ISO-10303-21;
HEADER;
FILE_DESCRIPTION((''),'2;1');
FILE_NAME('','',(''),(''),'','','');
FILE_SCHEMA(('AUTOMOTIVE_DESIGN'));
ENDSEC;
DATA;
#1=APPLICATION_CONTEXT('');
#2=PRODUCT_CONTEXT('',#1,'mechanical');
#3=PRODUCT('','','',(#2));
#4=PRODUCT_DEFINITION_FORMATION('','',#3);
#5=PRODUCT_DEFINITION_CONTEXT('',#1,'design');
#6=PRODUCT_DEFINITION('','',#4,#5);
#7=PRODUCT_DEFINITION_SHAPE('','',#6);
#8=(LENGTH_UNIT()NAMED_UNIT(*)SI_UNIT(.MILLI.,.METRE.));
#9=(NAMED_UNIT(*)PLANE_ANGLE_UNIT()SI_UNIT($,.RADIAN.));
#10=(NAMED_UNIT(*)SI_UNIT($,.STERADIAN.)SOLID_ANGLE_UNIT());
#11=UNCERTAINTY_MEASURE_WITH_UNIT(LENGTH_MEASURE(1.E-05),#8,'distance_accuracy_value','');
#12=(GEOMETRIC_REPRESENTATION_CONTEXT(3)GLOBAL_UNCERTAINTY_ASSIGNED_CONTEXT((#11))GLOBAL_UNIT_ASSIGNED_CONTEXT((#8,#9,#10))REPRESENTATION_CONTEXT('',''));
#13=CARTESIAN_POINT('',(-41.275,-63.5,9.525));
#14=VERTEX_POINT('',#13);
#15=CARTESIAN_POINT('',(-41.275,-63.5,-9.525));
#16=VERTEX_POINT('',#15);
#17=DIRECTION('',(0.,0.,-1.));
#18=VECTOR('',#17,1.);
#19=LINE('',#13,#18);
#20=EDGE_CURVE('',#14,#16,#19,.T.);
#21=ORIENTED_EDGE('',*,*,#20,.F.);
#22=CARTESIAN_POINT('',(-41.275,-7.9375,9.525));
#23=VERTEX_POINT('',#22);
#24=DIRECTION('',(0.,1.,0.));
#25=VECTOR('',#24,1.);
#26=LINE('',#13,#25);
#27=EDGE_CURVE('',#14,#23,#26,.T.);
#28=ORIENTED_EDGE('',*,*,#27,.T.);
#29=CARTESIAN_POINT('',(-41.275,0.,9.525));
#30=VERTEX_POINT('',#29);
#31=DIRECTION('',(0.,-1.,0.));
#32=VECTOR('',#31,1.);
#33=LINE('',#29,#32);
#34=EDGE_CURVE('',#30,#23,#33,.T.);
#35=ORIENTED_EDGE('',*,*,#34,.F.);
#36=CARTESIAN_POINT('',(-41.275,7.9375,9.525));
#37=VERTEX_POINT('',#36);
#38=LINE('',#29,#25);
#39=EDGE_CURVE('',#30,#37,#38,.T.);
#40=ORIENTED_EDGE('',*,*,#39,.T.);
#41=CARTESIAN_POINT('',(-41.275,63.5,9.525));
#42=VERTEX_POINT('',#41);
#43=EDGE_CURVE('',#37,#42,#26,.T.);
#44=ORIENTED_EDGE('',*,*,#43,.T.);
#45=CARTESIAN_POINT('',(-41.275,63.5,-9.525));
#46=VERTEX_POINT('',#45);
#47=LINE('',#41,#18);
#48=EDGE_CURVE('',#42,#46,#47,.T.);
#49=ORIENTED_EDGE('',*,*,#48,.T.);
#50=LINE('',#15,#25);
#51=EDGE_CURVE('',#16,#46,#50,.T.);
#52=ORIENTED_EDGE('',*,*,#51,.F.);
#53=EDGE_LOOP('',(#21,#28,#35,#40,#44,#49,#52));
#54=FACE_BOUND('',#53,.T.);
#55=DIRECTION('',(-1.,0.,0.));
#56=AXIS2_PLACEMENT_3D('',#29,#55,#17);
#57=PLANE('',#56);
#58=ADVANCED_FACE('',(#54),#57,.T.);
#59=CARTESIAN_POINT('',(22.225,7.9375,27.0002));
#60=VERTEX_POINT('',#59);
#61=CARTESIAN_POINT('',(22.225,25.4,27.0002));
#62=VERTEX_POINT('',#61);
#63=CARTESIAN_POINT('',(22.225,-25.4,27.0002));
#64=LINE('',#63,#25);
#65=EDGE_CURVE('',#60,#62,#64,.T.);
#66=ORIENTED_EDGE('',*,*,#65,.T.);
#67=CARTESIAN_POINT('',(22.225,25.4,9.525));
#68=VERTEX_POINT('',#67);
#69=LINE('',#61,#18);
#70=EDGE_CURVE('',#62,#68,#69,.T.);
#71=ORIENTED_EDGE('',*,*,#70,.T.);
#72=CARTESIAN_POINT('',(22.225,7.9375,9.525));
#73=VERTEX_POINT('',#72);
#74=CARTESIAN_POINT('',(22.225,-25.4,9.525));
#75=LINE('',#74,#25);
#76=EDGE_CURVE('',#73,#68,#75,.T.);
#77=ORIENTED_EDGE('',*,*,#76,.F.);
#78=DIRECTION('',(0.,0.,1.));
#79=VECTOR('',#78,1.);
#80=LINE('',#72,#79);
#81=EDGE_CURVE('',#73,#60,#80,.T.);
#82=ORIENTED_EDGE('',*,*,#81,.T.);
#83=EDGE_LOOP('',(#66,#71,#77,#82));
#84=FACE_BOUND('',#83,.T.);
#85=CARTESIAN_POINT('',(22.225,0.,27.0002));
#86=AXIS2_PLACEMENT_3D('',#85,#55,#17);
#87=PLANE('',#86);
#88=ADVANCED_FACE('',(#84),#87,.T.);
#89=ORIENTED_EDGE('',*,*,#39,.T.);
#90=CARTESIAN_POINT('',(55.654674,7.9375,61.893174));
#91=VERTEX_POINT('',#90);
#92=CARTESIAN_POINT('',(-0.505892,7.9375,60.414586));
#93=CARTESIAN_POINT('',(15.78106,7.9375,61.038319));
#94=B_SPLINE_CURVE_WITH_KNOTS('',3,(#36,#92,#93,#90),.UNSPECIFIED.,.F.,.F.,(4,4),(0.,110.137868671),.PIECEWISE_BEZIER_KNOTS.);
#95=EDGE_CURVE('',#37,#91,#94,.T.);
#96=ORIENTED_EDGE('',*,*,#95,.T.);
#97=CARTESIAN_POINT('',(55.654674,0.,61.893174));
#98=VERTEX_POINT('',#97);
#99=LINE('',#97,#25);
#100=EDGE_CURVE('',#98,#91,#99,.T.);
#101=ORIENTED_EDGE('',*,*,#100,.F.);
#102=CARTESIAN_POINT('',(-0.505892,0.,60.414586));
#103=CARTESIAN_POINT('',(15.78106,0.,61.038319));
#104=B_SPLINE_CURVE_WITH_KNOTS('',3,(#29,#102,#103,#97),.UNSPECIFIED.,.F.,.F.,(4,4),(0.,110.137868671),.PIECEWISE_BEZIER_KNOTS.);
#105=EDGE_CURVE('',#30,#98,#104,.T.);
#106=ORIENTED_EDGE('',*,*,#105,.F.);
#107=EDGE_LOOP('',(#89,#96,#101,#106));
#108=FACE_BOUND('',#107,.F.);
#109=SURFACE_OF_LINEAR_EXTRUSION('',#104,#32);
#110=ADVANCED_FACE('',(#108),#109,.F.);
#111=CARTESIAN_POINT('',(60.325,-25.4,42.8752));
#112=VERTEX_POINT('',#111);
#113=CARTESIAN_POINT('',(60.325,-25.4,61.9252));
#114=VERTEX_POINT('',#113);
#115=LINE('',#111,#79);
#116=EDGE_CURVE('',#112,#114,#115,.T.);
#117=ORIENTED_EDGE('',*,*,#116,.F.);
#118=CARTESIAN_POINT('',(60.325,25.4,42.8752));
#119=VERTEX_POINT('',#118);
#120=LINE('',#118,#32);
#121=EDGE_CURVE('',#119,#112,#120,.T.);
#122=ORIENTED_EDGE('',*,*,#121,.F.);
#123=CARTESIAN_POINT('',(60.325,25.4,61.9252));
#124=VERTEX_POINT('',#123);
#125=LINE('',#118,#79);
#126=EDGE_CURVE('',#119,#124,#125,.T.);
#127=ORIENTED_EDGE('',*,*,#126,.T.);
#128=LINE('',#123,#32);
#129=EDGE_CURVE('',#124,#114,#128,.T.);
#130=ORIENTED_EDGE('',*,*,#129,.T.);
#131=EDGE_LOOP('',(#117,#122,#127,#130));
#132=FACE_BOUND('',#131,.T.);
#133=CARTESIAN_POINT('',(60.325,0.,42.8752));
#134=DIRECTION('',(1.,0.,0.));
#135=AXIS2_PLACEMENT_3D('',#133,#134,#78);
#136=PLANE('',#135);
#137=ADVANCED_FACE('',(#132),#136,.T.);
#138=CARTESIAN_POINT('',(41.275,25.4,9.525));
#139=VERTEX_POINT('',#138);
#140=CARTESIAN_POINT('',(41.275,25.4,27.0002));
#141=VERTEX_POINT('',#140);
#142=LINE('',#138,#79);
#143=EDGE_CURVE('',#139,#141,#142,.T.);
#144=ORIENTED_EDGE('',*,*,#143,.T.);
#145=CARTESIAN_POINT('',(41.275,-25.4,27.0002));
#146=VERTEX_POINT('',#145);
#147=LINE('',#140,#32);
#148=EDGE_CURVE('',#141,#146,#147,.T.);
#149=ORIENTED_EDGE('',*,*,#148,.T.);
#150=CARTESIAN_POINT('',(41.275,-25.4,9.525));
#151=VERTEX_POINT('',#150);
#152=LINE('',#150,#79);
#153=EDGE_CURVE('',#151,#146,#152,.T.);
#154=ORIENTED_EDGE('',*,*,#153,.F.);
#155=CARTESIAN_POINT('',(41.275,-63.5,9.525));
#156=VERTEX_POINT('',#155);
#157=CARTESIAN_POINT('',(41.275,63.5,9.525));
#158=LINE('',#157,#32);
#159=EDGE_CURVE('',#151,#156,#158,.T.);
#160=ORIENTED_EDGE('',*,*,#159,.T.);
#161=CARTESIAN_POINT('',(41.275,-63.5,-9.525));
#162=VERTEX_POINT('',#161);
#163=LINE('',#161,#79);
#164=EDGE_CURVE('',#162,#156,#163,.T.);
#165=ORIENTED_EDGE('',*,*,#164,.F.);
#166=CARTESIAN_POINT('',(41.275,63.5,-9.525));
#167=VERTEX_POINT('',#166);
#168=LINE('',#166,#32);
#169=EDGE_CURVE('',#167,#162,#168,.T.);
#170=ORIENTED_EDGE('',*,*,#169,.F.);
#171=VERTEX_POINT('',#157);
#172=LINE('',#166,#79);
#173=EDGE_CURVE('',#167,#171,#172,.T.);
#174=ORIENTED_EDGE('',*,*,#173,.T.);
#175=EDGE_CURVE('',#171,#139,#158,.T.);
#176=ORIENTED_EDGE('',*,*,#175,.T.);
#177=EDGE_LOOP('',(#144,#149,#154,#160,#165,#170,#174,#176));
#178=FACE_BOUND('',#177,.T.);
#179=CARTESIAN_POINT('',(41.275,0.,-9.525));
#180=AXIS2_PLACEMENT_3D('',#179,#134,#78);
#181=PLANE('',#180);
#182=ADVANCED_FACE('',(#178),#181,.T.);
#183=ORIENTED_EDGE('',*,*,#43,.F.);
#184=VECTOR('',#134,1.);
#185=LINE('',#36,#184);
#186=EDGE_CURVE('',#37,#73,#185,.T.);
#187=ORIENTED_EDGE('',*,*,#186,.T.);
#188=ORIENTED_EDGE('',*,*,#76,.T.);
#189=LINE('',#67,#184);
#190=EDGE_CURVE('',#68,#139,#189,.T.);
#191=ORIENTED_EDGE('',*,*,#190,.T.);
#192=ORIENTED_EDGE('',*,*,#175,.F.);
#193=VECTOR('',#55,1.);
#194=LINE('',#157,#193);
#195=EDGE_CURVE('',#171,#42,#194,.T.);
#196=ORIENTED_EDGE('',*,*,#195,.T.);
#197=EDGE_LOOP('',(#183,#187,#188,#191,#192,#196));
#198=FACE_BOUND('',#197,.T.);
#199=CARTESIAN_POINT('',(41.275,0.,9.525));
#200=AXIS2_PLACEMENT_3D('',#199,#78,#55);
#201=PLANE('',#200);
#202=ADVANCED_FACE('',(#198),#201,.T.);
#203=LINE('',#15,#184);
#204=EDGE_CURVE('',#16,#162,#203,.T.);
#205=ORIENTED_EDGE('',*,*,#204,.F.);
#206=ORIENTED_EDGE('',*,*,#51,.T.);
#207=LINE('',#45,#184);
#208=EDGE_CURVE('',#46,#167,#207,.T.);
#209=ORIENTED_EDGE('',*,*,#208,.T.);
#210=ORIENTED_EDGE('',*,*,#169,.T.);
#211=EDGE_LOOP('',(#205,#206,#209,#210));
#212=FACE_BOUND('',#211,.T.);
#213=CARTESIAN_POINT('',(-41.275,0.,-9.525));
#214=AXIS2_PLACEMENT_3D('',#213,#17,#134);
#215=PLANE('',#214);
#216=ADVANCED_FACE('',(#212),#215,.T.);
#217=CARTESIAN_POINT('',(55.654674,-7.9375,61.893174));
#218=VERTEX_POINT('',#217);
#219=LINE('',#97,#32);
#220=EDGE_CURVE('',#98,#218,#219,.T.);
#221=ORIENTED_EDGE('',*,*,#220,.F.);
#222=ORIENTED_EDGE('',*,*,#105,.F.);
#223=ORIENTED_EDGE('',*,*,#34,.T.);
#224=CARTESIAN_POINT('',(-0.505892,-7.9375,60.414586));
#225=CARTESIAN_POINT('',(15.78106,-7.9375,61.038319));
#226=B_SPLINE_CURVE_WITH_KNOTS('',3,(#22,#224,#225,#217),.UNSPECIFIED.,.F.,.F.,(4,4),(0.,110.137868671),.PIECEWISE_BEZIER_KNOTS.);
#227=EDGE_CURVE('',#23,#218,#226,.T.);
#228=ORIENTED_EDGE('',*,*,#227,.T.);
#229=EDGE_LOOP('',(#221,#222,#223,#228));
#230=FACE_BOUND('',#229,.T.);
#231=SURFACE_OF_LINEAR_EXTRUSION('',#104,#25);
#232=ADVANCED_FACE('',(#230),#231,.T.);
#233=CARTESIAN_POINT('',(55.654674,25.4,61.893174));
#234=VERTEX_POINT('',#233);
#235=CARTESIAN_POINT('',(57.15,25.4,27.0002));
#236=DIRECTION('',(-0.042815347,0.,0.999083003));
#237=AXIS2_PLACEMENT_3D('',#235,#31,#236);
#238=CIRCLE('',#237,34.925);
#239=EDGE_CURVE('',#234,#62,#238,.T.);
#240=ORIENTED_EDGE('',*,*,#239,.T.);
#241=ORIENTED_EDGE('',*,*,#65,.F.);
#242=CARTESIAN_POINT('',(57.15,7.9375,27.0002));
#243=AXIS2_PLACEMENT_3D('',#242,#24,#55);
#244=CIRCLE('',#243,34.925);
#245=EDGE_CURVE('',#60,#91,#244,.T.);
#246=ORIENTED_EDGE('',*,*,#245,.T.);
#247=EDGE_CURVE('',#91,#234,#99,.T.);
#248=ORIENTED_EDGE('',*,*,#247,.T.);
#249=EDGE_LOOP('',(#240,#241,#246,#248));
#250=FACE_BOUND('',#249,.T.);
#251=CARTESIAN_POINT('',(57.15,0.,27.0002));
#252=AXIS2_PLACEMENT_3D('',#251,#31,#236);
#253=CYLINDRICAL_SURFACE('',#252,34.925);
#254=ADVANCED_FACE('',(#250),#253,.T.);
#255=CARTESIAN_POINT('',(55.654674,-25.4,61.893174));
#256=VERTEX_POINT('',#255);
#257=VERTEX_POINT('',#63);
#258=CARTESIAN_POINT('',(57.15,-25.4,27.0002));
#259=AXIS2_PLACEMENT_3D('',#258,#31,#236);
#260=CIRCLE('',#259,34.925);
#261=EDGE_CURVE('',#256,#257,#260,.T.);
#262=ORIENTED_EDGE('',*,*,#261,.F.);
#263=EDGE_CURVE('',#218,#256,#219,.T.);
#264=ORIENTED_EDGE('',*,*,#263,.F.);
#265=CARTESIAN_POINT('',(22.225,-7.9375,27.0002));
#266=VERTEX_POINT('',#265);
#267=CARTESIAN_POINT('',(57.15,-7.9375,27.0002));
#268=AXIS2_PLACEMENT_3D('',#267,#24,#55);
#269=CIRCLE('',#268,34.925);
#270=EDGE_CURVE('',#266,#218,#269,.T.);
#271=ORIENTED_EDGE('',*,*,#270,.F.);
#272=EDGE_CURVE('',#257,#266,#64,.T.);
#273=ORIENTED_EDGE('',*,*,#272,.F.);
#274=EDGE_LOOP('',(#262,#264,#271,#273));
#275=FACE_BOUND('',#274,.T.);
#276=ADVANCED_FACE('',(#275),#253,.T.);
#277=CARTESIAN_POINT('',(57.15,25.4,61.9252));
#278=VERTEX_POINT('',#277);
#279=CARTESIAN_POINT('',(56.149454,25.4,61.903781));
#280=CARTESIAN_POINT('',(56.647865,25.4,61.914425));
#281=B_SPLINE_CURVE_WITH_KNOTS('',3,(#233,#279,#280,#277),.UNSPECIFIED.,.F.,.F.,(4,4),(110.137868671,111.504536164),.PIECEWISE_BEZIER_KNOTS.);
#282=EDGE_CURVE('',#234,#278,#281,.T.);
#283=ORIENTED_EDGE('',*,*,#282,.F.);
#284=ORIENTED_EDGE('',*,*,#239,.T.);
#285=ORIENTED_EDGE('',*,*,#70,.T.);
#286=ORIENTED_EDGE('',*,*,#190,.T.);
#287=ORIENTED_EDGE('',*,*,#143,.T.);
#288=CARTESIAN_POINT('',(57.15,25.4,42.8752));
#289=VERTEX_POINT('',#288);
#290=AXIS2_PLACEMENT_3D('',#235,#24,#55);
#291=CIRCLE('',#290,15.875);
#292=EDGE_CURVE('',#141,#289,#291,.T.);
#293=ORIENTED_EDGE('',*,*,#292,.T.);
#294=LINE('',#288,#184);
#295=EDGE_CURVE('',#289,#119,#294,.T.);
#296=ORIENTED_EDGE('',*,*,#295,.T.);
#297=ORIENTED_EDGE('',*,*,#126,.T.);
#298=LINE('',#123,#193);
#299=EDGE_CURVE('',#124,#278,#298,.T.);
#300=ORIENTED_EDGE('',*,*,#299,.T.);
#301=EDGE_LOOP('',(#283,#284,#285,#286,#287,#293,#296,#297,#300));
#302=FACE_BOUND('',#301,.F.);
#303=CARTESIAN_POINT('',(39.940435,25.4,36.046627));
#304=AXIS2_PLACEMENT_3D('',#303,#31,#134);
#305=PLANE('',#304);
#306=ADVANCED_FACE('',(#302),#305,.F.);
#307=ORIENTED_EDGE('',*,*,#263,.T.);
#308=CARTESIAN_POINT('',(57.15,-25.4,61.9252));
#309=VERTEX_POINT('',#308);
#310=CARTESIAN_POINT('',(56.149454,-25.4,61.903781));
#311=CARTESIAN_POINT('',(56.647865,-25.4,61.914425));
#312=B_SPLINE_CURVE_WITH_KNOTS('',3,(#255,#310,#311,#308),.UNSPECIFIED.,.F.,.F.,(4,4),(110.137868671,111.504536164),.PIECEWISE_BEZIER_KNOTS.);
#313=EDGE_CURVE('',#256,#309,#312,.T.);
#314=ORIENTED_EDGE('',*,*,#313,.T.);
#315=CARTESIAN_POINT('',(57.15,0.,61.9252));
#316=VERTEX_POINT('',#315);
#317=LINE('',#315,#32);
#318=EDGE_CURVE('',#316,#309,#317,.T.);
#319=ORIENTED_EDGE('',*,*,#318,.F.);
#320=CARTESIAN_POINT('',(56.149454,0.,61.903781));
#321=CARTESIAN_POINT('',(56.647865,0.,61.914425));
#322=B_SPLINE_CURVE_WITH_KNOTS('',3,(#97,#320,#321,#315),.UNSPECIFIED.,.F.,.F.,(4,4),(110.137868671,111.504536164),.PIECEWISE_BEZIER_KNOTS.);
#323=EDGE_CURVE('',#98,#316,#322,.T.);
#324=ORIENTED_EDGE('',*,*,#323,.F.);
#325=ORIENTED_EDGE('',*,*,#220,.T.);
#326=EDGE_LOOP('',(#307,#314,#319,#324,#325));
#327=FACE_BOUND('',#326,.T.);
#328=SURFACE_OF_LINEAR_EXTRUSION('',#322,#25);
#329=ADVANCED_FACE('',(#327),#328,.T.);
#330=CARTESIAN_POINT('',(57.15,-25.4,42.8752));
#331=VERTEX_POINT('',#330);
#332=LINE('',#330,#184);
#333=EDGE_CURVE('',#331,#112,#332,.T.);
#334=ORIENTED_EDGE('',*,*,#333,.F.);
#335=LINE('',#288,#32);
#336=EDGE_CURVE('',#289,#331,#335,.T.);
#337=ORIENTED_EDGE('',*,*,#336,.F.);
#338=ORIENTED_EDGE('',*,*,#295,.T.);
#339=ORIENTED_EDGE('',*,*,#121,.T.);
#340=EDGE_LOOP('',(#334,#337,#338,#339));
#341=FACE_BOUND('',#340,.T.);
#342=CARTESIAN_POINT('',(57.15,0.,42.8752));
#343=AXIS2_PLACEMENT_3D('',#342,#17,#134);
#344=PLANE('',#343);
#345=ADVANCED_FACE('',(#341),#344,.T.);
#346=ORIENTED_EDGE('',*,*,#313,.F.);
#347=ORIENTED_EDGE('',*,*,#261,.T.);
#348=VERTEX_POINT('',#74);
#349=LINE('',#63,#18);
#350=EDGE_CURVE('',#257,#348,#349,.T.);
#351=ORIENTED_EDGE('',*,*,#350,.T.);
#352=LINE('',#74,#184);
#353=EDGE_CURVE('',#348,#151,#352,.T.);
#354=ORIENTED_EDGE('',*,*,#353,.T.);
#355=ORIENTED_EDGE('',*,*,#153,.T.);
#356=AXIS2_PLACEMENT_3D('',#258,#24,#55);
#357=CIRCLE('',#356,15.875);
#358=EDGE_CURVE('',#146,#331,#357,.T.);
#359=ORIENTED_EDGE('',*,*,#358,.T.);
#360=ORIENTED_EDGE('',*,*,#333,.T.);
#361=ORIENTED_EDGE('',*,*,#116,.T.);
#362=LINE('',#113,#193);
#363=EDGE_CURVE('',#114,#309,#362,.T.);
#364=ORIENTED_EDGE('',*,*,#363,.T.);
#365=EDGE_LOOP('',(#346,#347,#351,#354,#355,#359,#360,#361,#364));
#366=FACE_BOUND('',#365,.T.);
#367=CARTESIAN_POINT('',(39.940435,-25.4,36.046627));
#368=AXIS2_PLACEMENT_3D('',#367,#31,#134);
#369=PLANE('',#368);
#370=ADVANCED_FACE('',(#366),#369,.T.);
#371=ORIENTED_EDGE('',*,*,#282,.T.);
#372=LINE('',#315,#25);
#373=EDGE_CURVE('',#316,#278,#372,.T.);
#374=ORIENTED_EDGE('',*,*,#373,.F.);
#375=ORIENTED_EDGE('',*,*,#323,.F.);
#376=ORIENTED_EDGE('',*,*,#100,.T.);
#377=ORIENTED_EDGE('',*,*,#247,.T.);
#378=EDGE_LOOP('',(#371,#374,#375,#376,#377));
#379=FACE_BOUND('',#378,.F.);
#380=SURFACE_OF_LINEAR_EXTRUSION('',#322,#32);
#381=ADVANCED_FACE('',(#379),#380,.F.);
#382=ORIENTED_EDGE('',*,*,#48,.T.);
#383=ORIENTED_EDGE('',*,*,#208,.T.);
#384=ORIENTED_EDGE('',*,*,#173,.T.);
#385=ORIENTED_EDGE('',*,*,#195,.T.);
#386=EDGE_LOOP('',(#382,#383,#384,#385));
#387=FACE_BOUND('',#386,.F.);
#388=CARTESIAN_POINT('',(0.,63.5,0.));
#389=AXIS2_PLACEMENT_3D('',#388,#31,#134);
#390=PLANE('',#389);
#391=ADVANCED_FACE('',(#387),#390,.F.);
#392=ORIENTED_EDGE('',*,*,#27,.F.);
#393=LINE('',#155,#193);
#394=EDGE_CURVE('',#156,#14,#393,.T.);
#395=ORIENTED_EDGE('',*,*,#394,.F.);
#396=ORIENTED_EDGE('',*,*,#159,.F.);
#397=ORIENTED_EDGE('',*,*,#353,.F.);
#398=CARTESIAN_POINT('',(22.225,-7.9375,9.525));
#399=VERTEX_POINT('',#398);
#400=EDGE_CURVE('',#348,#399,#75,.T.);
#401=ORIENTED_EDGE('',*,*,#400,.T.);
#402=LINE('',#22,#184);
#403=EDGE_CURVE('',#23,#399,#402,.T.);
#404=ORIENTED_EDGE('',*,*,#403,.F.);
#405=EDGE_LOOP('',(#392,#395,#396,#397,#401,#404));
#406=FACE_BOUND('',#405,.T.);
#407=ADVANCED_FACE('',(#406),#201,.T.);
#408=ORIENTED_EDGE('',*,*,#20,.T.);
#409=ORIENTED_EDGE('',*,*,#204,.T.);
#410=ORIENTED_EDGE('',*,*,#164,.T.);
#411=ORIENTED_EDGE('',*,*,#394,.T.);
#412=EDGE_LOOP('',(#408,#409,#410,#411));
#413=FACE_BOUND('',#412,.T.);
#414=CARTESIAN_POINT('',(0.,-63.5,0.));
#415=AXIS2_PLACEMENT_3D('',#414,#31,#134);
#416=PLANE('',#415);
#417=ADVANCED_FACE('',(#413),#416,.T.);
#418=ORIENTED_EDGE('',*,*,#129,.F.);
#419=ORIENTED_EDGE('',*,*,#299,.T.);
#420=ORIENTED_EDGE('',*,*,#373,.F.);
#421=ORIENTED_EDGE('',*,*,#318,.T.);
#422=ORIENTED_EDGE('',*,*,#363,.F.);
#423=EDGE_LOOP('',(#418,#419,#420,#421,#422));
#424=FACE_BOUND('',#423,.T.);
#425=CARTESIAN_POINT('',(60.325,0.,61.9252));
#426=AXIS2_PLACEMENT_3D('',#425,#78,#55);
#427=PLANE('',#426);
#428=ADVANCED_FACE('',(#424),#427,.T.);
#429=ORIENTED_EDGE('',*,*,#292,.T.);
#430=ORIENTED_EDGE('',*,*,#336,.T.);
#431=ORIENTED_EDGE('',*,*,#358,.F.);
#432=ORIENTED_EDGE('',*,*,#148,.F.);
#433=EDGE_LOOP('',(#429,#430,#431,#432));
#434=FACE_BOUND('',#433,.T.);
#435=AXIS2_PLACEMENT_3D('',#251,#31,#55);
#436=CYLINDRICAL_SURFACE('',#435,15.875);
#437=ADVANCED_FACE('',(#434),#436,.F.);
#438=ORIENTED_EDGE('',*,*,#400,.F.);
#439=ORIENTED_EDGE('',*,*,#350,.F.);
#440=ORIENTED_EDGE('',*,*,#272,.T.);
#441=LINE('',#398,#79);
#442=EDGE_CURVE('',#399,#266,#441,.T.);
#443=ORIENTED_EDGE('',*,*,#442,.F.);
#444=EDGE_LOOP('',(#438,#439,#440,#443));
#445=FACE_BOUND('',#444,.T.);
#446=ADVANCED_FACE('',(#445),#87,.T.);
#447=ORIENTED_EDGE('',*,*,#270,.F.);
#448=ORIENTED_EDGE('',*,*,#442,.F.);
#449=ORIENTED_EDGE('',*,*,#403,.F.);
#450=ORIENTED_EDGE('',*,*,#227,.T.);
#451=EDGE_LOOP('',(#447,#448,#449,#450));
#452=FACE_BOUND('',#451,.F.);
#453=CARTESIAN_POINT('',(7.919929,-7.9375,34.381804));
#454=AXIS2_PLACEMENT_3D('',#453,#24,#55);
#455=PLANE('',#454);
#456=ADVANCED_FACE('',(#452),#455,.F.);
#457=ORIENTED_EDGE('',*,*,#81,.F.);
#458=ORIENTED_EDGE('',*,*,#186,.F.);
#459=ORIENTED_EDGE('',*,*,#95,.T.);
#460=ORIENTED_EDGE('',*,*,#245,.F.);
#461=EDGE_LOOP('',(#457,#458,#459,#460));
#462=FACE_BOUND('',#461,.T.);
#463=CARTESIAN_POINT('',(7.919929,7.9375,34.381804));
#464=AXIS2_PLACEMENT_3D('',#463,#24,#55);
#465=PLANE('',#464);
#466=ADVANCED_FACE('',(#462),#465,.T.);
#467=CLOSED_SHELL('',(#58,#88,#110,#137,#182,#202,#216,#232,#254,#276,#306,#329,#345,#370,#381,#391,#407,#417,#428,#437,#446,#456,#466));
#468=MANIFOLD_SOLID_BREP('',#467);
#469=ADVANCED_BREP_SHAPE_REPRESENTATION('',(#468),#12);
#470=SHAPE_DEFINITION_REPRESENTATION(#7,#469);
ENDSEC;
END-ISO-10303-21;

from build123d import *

# Parameters (mm, degrees)
F1_DEPTH = 63.5
F2_DEPTH = 25.4
F3_DEPTH = 7.9375


with BuildPart() as f1:
    # F0 (on Front) → F1 (new body, symmetric)
    with BuildSketch(Plane.XZ):
        Polygon((-41.275, -9.525), (41.275, -9.525), (41.275, 9.525), (22.225, 9.525), (-41.275, 9.525), align=None)
    extrude(amount=F1_DEPTH, both=True)

    # F0 (on Front) → F2 (join, symmetric)
    with BuildSketch(Plane.XZ):
        with BuildLine():
            Line((22.225, 9.525), (41.275, 9.525))
            Line((41.275, 9.525), (41.275, 27.0002))
            ThreePointArc((41.275, 27.0002), (45.9246798487, 38.2255201513), (57.15, 42.8752))
            Line((57.15, 42.8752), (60.325, 42.8752))
            Line((60.325, 42.8752), (60.325, 61.9252))
            Line((60.325, 61.9252), (57.15, 61.9252))
            add(Edge.make_bspline(
                [(55.6546739899, 61.8931738647), (56.1494536046, 61.9037814957), (56.6478649939, 61.9144247136), (57.15, 61.9252)],
                knots=[110.1378686708, 110.1378686708, 110.1378686708, 110.1378686708, 111.5045361635, 111.5045361635, 111.5045361635, 111.5045361635], degree=3))
            ThreePointArc((55.6546739899, 61.8931738647), (31.9311589689, 51.1614433879), (22.225, 27.0002))
            Line((22.225, 27.0002), (22.225, 9.525))
        make_face()
    extrude(amount=F2_DEPTH, both=True)

    # F0 (on Front) → F3 (join, symmetric)
    with BuildSketch(Plane.XZ):
        with BuildLine():
            add(Edge.make_bspline(
                [(-41.275, 9.525), (-0.5058915332, 60.4145856104), (15.7810598781, 61.0383193594), (55.6546739899, 61.8931738647)],
                knots=[0, 0, 0, 0, 110.1378686708, 110.1378686708, 110.1378686708, 110.1378686708], degree=3))
            Line((-41.275, 9.525), (22.225, 9.525))
            Line((22.225, 9.525), (22.225, 27.0002))
            ThreePointArc((22.225, 27.0002), (31.9311589689, 51.1614433879), (55.6546739899, 61.8931738647))
        make_face()
    extrude(amount=F3_DEPTH, both=True)


solid = f1.part
